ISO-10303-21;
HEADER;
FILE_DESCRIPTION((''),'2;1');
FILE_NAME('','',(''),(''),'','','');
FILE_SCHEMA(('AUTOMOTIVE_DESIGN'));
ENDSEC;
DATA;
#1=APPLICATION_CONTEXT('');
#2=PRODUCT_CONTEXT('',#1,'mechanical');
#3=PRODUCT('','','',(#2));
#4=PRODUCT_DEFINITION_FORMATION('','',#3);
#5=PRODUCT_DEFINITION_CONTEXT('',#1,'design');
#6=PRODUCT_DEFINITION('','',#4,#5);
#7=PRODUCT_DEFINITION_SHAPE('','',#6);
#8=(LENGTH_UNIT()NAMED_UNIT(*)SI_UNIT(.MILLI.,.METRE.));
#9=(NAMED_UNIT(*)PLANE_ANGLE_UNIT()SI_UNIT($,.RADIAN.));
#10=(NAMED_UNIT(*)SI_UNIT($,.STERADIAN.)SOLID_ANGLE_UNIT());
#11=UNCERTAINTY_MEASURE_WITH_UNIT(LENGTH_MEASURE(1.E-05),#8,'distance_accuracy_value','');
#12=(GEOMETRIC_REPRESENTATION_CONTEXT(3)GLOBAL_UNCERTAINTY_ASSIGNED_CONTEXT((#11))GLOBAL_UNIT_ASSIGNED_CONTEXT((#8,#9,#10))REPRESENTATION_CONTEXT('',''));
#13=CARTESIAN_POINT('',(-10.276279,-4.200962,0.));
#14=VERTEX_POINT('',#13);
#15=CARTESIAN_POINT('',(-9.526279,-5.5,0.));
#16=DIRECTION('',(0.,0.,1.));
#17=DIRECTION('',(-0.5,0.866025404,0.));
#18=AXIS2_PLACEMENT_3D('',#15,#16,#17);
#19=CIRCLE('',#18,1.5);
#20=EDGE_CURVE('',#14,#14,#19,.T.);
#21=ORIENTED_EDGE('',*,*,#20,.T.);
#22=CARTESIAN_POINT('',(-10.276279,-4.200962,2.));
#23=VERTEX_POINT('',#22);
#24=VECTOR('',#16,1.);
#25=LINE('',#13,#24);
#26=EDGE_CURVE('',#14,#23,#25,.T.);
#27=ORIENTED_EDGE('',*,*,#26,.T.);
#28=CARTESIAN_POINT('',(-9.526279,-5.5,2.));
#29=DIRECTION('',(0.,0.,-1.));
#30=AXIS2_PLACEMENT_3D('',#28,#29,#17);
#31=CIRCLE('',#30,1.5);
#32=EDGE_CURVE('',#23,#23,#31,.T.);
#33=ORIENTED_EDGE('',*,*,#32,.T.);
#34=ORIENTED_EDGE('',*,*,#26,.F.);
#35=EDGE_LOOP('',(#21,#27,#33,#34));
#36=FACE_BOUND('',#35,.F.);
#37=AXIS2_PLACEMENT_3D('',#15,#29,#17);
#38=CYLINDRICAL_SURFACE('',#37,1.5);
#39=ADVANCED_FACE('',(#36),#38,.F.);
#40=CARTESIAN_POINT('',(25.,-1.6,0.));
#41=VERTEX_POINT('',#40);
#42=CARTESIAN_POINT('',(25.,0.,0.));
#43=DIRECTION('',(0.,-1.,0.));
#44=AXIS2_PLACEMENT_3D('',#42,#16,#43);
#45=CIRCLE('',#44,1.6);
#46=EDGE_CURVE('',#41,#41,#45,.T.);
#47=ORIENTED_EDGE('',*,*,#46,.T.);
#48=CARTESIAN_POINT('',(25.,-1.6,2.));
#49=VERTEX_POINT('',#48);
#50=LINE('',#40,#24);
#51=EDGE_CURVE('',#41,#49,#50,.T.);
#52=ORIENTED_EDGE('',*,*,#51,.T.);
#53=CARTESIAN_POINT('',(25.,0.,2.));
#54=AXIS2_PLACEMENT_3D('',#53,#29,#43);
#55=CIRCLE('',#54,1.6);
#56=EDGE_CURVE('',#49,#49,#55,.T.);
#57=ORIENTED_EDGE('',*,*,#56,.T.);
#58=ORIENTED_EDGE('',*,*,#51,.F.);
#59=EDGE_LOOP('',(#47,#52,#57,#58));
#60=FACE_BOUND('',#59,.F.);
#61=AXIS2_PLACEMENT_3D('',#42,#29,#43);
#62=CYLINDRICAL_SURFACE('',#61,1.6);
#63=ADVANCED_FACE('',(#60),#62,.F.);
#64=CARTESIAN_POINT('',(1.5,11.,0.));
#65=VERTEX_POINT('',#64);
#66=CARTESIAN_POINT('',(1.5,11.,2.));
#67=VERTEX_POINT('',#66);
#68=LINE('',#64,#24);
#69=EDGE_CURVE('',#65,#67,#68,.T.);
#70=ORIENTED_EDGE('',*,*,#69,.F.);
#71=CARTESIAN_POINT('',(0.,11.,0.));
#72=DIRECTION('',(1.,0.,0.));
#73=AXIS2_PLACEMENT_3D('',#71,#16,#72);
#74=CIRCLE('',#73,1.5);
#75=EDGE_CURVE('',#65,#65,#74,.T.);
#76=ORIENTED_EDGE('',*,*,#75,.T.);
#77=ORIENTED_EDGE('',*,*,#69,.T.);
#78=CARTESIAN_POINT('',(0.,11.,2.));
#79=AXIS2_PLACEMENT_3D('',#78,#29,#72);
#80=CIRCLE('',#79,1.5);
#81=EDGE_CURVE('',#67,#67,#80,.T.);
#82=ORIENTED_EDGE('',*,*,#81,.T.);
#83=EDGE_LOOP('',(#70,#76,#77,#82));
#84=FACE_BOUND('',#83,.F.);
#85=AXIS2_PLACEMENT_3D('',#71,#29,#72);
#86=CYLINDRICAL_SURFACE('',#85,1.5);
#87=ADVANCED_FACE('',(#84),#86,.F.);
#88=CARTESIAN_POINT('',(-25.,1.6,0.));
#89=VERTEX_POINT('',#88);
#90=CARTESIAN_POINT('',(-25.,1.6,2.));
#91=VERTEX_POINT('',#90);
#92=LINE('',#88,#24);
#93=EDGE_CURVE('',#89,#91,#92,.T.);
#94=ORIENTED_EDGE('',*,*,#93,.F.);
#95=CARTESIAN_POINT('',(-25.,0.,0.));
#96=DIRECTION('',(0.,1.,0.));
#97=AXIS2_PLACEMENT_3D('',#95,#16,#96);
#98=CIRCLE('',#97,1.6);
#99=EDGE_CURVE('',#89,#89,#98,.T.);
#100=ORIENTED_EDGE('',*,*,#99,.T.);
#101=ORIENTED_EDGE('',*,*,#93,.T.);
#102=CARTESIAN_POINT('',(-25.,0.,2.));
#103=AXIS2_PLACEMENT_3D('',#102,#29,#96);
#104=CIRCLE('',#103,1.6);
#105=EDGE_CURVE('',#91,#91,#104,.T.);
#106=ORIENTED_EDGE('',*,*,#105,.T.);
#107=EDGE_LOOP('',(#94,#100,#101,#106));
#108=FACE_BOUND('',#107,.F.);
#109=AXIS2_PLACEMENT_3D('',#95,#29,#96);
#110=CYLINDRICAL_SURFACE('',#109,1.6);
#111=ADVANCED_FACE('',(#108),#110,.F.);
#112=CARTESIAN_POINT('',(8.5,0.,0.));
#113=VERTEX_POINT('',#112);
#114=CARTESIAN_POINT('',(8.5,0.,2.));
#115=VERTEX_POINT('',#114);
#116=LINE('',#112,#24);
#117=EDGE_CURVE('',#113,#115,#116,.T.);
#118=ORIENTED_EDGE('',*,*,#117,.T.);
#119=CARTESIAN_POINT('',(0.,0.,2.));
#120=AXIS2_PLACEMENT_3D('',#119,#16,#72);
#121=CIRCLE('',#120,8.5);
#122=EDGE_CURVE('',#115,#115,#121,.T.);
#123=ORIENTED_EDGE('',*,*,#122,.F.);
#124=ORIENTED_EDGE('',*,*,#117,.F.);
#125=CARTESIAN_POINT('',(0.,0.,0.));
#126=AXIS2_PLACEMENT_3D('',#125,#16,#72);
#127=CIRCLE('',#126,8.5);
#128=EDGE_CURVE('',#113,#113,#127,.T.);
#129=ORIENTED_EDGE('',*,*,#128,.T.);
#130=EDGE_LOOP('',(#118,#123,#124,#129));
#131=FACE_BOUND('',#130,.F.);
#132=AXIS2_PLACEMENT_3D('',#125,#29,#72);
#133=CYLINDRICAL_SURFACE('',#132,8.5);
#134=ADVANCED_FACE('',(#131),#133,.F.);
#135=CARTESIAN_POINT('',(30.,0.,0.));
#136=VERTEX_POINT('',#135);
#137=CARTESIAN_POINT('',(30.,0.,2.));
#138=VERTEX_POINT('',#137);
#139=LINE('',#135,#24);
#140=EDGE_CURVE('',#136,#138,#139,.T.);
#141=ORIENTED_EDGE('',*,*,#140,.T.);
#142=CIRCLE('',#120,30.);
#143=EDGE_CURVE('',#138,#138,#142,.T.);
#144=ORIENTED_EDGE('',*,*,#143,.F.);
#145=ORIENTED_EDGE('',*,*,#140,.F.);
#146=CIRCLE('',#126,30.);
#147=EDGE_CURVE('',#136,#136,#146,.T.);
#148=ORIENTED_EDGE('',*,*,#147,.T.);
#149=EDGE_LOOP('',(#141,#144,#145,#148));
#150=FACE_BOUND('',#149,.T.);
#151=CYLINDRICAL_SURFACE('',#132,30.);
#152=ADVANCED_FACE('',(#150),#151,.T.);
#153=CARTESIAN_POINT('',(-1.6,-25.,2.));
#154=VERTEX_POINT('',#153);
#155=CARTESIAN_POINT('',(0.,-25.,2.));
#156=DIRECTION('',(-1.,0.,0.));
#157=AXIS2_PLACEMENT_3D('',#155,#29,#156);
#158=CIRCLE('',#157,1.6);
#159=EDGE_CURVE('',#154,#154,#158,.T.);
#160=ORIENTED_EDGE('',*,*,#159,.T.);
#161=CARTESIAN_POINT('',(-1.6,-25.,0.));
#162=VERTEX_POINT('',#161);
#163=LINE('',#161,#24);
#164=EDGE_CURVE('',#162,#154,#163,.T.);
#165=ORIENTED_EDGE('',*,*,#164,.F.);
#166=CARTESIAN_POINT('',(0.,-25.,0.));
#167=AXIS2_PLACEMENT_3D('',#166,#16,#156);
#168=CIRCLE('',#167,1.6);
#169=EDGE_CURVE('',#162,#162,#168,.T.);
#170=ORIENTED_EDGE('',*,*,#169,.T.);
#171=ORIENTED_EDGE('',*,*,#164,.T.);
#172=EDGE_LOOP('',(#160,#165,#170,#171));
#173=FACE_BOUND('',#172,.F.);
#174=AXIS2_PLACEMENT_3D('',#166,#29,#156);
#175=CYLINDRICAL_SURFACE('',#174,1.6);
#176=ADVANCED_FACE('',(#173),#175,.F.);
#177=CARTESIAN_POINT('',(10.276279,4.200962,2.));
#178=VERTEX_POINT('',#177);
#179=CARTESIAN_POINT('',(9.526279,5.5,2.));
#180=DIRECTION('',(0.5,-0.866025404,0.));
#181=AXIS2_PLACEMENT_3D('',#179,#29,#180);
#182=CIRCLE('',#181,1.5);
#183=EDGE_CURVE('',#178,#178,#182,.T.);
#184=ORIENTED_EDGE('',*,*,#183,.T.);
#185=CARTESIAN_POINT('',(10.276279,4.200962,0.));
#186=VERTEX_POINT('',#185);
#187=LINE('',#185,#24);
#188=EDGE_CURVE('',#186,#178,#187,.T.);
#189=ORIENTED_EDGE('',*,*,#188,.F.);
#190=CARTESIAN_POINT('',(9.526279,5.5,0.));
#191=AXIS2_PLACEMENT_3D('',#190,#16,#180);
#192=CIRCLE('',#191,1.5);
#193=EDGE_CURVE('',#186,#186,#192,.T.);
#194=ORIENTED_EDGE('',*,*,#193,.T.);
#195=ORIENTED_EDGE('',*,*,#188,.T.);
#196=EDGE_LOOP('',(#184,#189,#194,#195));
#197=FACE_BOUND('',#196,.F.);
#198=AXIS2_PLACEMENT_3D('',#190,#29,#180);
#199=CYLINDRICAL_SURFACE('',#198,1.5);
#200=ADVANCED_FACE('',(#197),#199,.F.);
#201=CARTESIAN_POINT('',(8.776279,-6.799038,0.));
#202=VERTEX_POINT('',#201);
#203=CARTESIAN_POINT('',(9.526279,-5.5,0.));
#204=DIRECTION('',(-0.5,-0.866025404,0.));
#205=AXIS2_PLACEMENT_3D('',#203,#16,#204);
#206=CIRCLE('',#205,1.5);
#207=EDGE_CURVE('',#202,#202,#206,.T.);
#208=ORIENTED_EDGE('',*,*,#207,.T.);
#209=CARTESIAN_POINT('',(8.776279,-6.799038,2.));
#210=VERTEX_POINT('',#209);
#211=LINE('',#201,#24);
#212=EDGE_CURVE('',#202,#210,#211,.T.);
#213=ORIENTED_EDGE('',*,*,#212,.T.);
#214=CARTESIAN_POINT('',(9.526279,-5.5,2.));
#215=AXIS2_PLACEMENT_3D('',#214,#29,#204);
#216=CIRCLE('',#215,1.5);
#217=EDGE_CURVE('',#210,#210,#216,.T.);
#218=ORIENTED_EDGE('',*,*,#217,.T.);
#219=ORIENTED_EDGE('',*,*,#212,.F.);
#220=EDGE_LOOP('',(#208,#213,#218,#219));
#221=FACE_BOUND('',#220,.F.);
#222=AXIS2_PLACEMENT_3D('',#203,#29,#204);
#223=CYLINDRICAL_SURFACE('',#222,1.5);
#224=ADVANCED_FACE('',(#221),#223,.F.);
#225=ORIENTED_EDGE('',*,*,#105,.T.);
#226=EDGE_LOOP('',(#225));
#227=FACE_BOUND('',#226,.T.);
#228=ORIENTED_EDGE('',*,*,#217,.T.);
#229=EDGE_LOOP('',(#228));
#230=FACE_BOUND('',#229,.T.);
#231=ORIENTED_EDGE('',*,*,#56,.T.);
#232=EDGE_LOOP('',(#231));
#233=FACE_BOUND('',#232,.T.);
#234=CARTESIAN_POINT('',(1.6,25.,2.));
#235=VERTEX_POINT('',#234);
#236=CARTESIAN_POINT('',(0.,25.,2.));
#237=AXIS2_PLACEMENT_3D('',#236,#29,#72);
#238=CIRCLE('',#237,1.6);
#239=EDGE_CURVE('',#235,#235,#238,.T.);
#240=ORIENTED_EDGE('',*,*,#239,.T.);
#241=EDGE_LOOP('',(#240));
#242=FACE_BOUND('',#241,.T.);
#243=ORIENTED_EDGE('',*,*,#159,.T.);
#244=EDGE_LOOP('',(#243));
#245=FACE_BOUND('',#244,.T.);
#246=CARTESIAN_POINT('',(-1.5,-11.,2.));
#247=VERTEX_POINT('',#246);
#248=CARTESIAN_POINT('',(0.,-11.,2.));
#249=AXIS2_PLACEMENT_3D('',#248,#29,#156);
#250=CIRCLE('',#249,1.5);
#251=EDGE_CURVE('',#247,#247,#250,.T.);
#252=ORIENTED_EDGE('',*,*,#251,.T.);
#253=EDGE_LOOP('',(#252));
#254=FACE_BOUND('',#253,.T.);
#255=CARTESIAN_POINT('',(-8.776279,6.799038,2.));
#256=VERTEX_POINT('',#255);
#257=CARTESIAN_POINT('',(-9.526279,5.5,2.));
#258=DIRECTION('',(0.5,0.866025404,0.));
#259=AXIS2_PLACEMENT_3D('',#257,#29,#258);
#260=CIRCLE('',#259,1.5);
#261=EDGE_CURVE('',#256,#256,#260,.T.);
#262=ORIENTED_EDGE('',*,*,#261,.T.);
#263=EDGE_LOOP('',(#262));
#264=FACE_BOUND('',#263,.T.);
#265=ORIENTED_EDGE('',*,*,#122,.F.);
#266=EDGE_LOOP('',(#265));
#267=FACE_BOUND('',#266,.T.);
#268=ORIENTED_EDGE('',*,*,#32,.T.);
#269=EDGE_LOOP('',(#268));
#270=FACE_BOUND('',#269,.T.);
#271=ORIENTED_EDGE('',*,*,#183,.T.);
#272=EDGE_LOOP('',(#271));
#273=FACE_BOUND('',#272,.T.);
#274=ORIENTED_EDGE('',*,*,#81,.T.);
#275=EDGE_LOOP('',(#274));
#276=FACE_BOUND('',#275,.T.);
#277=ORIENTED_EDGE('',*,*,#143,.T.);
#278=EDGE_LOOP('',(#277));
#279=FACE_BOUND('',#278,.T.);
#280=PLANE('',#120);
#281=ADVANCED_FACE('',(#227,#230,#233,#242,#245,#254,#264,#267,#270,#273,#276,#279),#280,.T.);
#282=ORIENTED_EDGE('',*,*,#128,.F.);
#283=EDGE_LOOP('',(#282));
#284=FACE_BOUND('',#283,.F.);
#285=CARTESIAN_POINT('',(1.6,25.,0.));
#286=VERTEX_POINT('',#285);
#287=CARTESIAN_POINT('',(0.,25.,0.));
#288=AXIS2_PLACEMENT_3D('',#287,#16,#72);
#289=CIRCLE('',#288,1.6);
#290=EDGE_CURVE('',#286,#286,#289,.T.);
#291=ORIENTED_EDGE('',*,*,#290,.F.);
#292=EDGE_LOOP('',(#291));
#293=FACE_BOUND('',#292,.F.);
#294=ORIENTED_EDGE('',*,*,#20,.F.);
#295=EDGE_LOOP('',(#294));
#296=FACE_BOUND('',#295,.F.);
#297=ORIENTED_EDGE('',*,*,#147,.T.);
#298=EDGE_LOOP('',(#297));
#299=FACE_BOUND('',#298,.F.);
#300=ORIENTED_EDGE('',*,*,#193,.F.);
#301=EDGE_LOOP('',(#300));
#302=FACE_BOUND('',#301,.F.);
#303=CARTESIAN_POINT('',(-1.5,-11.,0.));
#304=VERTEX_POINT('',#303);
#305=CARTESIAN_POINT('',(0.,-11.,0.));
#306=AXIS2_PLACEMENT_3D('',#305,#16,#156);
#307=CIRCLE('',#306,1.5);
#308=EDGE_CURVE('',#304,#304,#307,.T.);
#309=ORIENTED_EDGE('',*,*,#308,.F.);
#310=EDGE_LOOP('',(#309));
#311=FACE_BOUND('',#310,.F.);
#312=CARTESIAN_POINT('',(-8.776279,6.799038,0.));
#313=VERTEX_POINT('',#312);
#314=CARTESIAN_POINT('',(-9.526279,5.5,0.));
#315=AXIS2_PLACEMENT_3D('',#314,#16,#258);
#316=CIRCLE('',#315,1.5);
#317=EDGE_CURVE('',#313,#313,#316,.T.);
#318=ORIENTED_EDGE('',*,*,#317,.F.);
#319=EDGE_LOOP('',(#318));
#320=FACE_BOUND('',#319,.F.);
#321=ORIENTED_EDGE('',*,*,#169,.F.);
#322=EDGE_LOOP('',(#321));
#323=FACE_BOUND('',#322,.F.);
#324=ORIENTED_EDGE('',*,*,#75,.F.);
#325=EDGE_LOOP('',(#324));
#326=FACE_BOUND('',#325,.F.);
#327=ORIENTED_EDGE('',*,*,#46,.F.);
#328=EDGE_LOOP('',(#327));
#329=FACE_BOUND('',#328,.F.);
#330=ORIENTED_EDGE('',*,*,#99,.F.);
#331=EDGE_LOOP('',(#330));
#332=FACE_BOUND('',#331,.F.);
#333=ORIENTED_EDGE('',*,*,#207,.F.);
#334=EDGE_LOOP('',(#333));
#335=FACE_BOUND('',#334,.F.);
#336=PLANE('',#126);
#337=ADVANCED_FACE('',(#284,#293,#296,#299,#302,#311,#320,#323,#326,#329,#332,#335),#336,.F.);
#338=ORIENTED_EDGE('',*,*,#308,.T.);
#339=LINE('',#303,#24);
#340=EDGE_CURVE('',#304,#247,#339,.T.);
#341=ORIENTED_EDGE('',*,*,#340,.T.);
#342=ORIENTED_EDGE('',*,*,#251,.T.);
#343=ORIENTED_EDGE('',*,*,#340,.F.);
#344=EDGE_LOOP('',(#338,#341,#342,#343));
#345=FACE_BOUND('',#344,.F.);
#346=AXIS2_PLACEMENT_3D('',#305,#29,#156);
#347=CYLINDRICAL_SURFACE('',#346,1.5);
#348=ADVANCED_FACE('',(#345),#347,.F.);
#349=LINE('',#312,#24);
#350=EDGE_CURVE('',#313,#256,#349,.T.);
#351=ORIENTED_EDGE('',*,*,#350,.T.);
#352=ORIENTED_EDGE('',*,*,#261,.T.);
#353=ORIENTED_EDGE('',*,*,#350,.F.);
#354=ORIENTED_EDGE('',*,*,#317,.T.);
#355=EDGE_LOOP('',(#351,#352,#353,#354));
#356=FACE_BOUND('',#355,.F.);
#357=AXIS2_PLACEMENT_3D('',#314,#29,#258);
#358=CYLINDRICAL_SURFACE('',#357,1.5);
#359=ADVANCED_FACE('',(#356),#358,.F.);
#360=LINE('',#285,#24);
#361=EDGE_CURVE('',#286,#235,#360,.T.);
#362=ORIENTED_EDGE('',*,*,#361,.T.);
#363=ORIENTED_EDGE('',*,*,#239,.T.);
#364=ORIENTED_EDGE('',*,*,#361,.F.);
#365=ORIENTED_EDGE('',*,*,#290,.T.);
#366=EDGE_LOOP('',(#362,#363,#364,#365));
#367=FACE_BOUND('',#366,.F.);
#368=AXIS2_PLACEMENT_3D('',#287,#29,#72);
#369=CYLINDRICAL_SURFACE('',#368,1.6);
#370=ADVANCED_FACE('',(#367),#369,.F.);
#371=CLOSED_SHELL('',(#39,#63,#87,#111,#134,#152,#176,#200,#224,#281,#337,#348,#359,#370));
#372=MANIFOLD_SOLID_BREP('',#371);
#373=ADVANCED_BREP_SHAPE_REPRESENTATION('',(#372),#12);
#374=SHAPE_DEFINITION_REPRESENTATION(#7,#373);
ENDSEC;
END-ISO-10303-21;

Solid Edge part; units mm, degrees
sketch "Sketch1" plane through (0, 0, 0) normal (0, 0, 1) x (1, 0, 0)
  circle A0 centre (0, 0) radius 30
  circle A1 centre (0, 0) radius 8.5
extrude "Protrusion1" add sketch "Sketch1" along normal blind 2
sketch "Sketch2" plane through (0, 0, 0) normal (0, 0, 1) x (1, 0, 0)
  circle A0 centre (0, 11) radius 1.5
extrude "ExtrudedCutout_1" cut sketch "Sketch2" along normal mid plane 65.6802
pattern_circular "PatternOccurrence_1" count 6 over 360 about axis through (0, 0, 0) along (0, 0, -1) of "ExtrudedCutout_1"
sketch "Sketch3" plane through (0, 0, 0) normal (0, 0, 1) x (1, 0, 0)
  circle A0 centre (0, 25) radius 1.6
extrude "ExtrudedCutout_2" cut sketch "Sketch3" along normal mid plane 456.4322
pattern_circular "PatternOccurrence_2" count 4 over 360 about axis through (0, 0, 0) along (0, 0, -1) of "ExtrudedCutout_2"
